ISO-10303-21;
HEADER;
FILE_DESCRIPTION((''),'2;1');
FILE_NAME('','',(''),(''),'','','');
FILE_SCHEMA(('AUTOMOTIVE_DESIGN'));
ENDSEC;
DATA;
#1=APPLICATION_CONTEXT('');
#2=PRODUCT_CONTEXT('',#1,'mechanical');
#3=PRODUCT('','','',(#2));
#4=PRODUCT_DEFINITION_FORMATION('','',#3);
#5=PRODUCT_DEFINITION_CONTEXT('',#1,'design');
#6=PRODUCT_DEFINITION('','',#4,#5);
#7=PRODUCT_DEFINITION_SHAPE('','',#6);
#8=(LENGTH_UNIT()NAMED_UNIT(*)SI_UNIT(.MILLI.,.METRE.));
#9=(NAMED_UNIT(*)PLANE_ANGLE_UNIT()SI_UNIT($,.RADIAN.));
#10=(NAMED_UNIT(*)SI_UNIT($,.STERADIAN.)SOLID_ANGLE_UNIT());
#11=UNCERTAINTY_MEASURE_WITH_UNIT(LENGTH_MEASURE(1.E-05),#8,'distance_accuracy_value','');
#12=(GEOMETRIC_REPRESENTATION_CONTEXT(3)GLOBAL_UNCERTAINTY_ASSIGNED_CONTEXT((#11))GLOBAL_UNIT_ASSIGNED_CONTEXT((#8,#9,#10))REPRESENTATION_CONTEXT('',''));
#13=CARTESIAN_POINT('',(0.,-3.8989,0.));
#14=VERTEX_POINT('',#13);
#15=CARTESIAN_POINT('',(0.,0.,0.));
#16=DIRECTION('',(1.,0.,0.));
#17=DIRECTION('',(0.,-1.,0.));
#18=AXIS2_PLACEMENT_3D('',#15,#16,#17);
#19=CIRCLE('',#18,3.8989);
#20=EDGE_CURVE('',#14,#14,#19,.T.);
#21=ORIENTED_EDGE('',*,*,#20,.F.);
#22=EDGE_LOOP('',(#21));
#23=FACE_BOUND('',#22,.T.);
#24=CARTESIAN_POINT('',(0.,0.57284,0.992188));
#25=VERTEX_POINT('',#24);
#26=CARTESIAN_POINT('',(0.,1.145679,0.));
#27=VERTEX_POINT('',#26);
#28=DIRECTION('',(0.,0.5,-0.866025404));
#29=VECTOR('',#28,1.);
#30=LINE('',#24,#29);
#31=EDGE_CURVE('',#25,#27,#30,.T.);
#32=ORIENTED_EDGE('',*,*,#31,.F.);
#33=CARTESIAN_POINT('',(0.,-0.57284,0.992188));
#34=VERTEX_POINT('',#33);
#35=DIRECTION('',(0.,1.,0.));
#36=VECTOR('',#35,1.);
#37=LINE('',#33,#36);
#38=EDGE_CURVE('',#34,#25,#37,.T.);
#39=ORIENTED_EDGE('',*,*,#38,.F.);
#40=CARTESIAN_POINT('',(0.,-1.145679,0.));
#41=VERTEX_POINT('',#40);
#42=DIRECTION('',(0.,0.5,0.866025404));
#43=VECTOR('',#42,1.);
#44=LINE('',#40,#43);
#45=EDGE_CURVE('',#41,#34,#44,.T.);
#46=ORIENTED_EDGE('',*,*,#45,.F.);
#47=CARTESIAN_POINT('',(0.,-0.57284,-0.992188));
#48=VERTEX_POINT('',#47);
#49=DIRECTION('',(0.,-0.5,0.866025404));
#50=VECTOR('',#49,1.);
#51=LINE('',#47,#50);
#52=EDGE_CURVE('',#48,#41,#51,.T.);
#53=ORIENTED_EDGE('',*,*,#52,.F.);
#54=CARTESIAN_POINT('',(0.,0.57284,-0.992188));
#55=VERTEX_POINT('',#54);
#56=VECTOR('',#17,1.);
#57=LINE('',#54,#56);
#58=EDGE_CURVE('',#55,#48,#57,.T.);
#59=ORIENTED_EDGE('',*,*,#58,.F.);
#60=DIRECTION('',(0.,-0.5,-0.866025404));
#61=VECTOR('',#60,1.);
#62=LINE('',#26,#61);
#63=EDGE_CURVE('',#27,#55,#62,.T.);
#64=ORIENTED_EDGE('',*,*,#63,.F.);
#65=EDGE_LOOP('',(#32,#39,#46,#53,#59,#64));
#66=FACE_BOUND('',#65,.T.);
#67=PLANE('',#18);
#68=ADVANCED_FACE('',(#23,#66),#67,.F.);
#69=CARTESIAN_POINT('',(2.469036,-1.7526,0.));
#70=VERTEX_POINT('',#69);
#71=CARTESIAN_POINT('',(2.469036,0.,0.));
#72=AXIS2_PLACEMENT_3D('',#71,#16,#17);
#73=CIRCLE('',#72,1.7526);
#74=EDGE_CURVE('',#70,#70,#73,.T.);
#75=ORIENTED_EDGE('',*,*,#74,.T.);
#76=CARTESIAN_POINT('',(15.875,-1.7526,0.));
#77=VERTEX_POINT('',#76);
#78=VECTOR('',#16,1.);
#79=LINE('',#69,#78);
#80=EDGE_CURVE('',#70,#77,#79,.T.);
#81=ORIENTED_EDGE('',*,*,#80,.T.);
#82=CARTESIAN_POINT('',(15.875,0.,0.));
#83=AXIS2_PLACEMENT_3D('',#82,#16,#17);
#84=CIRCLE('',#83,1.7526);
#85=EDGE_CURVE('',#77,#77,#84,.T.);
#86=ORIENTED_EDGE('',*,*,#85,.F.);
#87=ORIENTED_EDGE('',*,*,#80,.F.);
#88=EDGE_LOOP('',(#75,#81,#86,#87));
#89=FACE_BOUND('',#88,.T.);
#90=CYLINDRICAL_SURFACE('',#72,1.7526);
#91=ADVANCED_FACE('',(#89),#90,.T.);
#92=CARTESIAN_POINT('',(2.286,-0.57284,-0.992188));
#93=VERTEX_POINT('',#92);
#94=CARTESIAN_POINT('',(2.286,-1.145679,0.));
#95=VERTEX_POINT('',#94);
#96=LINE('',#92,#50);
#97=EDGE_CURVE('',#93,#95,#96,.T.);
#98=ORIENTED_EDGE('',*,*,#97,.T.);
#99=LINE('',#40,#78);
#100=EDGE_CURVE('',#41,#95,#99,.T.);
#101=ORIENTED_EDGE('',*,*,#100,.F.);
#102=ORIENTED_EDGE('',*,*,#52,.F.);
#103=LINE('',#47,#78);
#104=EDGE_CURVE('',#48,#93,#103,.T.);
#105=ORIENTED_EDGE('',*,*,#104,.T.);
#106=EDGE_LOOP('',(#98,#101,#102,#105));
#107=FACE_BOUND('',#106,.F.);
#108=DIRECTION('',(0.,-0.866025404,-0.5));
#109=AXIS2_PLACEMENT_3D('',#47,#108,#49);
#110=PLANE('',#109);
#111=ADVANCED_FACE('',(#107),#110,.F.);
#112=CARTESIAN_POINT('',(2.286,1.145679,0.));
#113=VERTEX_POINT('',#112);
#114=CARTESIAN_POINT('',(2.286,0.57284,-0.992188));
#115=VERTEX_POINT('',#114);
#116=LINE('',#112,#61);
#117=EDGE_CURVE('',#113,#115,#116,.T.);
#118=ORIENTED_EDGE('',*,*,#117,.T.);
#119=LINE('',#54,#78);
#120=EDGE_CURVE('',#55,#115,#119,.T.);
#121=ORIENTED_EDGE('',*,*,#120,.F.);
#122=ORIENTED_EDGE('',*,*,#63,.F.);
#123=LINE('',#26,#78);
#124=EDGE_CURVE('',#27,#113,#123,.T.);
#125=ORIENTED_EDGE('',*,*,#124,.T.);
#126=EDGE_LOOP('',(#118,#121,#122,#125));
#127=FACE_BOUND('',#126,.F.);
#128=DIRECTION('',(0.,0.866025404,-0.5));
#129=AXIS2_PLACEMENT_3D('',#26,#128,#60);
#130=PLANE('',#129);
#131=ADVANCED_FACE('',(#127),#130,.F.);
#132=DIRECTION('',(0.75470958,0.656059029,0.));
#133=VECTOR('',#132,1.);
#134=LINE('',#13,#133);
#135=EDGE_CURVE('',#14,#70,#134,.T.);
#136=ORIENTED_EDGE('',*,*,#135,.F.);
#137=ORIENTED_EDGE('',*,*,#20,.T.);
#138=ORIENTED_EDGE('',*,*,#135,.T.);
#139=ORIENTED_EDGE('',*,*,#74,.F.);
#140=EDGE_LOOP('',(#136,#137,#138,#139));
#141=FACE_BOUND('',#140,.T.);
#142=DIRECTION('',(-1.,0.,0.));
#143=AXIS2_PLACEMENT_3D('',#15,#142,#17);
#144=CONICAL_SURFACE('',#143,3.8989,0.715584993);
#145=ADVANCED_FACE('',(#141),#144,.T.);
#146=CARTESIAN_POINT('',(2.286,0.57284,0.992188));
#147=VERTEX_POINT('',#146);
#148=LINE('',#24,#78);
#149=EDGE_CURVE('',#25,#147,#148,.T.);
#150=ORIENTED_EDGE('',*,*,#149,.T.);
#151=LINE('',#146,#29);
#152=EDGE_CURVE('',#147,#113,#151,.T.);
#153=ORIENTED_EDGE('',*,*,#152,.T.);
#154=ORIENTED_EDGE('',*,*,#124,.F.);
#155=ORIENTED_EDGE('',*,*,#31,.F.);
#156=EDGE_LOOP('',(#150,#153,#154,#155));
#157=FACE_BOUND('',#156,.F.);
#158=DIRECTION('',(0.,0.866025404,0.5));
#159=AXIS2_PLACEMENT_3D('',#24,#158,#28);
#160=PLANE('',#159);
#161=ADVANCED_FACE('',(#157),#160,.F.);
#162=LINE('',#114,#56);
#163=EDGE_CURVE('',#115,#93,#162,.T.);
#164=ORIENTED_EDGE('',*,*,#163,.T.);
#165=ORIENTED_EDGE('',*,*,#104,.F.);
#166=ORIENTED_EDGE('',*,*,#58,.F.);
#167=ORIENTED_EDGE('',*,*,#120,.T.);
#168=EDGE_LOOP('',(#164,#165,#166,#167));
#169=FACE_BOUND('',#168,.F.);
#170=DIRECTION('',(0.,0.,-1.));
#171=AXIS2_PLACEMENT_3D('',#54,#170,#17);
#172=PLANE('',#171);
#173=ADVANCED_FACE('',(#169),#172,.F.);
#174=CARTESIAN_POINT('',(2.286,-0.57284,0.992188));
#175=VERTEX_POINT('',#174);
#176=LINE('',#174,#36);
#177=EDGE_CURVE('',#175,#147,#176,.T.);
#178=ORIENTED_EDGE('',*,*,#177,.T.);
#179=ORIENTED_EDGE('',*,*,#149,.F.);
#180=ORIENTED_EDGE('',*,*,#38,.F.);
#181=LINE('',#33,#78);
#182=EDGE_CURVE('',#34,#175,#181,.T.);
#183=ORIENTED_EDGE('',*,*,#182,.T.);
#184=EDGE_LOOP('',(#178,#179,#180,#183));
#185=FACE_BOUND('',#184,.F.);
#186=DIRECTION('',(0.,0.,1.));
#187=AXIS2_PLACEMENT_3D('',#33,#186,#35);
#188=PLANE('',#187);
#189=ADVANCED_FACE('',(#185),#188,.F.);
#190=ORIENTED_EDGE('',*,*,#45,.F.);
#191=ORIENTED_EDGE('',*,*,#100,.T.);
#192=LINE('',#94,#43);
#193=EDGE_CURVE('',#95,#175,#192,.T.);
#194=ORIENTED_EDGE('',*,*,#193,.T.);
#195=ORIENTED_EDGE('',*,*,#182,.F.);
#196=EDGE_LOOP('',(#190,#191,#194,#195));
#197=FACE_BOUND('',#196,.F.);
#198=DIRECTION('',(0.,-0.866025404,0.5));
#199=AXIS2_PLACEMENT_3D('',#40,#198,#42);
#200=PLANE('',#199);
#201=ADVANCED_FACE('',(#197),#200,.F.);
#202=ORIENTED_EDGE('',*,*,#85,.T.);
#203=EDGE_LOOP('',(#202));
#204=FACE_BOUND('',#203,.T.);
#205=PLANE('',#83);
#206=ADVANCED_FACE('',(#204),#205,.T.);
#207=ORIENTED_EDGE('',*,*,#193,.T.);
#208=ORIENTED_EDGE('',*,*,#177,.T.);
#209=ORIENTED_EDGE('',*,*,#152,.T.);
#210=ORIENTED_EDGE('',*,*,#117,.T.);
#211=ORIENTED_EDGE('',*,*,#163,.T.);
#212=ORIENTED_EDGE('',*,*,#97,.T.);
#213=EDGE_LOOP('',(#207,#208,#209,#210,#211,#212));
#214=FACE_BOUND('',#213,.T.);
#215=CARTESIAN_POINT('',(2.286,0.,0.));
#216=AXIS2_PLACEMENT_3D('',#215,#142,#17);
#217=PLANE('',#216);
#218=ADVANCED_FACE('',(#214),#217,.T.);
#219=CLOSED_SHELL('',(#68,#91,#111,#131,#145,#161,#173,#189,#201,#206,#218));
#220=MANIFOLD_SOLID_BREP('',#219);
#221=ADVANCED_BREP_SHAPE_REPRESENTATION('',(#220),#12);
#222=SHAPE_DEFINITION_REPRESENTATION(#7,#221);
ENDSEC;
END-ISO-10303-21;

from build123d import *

# Parameters (mm, degrees)
F4_DEPTH = 2.286


# Not quite as in the source:
# - a feature names something its author has since deleted; it is built from what else it names


with BuildPart() as f2:
    # F0 (on Top) → F2 (revolve)
    with BuildSketch(Plane.XY):
        Polygon((2.4690357124, -1.7526), (15.875, -1.7526), (15.875, 0), (0, 0), (0, -3.8989), align=None)
    revolve(axis=Axis((4.9627271947, 0, 0), (1, 0, 0)))

    # F3 (on face) → F4 (cut)
    with BuildSketch(Plane(origin=(0, 0, 0), x_dir=(0, -1, 0), z_dir=(-1, 0, 0))):
        Polygon((0.5728397202, 0.9921875), (-0.5728397202, 0.9921875), (-1.1456794404, 0), (-0.5728397202, -0.9921875), (0.5728397202, -0.9921875), (1.1456794404, 0), align=None)
    extrude(amount=-F4_DEPTH, mode=Mode.SUBTRACT)


solid = f2.part
